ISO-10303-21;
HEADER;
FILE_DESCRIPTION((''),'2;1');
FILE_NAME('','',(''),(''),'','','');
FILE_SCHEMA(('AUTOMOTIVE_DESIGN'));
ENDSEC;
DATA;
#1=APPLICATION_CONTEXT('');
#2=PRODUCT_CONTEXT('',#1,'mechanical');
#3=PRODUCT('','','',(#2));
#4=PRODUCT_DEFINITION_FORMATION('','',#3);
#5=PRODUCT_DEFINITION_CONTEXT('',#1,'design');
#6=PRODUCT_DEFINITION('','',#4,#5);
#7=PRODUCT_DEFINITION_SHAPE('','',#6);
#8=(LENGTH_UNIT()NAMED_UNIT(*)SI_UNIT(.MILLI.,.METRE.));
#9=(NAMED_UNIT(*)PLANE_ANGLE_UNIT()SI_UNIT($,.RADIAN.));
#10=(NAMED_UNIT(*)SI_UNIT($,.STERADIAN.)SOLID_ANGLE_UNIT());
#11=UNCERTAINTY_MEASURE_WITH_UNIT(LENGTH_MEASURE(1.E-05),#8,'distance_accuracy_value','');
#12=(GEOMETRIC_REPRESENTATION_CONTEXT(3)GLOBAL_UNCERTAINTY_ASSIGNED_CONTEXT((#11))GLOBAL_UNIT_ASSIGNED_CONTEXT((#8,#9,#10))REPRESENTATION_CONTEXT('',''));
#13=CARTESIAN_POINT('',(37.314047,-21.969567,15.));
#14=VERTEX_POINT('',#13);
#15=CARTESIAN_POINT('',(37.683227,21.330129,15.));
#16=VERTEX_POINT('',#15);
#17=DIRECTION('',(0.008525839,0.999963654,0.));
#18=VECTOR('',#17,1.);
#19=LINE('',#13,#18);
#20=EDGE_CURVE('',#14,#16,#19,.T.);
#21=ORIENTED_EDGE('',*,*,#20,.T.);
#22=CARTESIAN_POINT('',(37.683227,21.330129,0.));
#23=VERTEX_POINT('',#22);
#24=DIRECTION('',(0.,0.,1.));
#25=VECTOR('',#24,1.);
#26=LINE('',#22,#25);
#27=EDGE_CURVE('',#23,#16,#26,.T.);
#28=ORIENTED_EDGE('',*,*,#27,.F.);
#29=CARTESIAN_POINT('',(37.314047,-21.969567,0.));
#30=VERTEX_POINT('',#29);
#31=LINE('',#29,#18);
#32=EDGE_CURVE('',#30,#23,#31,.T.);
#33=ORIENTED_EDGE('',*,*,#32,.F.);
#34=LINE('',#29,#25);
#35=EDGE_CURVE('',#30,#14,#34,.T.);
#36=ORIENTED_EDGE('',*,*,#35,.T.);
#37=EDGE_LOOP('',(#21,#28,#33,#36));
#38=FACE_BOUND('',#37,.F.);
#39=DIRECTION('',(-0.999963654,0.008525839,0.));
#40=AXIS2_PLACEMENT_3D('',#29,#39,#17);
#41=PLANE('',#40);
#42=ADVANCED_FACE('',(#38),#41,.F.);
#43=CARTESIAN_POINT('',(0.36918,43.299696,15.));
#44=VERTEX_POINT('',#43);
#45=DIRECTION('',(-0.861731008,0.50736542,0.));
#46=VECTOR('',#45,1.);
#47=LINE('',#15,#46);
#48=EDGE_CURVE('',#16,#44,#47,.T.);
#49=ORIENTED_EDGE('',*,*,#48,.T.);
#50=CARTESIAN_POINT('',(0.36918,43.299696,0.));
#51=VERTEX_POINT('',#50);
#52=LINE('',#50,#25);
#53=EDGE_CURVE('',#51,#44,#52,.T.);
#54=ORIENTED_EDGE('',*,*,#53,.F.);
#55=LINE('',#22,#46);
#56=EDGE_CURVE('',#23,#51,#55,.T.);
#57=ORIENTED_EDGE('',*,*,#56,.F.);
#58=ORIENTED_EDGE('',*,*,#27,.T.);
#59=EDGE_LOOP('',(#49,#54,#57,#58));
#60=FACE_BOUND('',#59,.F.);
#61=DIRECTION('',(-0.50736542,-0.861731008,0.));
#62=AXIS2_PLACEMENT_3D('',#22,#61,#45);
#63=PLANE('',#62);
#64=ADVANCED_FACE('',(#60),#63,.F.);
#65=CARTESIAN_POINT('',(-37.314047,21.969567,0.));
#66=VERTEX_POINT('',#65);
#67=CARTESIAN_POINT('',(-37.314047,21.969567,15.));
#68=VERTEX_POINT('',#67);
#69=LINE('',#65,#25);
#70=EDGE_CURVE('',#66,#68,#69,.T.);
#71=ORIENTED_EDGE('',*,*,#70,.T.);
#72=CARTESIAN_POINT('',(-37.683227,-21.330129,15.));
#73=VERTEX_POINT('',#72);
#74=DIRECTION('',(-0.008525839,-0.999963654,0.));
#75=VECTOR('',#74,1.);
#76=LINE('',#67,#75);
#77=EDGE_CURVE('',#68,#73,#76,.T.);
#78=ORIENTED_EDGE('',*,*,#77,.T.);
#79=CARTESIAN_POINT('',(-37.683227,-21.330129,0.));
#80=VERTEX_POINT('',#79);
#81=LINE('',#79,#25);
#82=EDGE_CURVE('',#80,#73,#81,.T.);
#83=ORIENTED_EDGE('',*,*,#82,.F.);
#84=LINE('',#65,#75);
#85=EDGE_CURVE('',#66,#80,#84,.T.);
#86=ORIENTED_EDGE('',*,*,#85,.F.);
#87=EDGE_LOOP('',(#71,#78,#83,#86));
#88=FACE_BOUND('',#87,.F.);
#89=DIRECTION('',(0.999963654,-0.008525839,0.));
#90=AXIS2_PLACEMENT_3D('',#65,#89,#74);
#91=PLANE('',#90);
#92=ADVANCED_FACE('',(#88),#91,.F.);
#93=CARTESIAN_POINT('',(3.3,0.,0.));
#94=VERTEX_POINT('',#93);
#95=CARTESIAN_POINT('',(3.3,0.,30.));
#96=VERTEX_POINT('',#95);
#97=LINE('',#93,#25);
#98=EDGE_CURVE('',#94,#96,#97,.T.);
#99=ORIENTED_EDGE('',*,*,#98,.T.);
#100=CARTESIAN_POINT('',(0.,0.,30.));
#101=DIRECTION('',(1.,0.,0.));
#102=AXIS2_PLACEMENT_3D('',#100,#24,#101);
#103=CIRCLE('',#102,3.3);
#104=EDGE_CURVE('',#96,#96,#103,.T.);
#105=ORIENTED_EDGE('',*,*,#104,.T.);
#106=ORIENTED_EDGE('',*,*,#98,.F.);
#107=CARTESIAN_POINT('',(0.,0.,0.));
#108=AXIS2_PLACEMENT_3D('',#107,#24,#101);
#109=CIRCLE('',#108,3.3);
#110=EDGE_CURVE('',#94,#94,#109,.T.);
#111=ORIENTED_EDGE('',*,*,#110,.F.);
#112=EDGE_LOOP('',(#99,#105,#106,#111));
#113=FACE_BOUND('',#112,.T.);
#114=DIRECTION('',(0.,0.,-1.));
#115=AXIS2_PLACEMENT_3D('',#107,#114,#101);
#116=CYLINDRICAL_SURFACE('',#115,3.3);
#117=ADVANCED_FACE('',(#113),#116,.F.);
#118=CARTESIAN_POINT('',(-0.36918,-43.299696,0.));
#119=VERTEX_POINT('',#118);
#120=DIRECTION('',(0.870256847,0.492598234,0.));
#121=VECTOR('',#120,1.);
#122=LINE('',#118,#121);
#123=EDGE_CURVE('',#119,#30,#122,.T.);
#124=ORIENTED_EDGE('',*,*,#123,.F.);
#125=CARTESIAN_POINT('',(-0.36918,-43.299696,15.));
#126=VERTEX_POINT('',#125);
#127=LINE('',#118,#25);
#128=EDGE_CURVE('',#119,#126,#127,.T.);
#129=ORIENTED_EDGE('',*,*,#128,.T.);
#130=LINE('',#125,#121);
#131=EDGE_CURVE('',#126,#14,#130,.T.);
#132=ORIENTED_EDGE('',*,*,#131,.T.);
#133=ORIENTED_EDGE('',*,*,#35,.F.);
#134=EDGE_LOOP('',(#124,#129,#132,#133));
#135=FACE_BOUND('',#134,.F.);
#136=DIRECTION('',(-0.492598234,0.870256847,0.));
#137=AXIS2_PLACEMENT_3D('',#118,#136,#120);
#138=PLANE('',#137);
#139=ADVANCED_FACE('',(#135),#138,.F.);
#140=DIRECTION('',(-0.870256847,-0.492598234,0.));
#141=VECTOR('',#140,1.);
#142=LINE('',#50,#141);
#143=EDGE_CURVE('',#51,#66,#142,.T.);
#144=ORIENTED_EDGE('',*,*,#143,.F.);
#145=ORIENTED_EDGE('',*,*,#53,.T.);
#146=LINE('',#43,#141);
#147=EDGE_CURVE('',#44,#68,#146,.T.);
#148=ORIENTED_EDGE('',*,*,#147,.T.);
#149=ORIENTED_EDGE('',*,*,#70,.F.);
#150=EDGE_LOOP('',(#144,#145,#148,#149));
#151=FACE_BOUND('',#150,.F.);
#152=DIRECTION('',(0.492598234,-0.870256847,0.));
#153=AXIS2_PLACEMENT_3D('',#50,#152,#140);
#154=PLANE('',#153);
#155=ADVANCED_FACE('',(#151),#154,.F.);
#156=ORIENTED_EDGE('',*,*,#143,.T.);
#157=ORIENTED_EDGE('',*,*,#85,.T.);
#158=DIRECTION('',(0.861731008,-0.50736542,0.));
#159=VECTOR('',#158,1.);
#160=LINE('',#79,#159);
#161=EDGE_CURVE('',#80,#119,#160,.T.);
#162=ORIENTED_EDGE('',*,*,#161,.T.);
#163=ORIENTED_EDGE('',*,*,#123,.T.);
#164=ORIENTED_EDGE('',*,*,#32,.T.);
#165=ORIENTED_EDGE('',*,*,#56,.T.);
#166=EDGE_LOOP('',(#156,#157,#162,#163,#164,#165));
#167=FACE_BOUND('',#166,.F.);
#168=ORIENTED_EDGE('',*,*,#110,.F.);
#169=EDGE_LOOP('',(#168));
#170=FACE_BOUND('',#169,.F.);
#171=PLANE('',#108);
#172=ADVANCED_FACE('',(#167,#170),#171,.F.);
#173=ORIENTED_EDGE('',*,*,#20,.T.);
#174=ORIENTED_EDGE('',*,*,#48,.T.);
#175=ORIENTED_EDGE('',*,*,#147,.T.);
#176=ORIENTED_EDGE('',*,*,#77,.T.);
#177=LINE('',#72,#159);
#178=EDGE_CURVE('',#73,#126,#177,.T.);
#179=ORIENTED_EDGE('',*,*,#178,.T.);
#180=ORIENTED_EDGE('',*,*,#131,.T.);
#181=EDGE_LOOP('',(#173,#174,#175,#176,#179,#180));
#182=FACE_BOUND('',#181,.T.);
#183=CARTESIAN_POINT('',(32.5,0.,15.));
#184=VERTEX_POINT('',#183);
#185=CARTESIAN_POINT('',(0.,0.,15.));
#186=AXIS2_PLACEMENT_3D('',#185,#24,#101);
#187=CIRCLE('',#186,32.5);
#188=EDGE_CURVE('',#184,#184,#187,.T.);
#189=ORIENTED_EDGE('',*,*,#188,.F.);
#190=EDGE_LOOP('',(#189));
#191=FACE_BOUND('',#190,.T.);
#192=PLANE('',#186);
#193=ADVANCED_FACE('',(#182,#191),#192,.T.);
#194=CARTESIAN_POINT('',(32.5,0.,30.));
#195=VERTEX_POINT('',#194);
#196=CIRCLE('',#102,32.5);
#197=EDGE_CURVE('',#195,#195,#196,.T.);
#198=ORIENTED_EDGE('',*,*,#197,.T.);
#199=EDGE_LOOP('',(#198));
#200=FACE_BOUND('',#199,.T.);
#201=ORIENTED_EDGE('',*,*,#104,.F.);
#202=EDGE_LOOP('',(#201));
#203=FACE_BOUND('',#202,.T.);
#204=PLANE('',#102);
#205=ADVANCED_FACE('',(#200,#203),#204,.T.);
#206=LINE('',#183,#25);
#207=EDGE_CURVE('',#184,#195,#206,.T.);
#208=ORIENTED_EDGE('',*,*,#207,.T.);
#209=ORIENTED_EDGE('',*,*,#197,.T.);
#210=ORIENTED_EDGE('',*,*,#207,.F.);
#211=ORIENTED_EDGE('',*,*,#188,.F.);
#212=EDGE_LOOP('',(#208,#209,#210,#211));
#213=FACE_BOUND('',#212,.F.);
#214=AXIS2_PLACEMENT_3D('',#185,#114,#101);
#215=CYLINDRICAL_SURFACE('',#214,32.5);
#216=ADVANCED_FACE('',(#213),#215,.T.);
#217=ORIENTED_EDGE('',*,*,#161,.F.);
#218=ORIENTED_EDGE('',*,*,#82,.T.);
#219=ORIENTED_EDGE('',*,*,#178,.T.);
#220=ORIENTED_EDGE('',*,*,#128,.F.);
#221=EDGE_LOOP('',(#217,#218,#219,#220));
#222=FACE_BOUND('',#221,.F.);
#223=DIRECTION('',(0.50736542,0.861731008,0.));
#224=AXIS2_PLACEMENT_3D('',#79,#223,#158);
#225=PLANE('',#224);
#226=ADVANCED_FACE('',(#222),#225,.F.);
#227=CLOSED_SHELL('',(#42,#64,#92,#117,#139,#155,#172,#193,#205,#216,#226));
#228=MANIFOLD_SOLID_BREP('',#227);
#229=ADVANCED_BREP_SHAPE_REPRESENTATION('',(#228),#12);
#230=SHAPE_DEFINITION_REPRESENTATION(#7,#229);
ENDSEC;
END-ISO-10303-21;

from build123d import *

# Parameters (mm, degrees)
F1_DEPTH = 15
F2_R     = 32.5
F3_DEPTH = 15
F4_R     = 3.3
F5_DEPTH = 30


# Not quite as in the source:
# - a feature names something its author has since deleted; it is built from what else it names


with BuildPart() as f1:
    # F0 (on Top) → F1 (new body)
    with BuildSketch(Plane.XY):
        Polygon((0.369179663, 43.2996963774), (-37.3140472075, 21.9695671555), (-37.6832268705, -21.330129222), (-0.369179663, -43.2996963774), (37.3140472075, -21.9695671555), (37.6832268705, 21.330129222), align=None)
    extrude(amount=F1_DEPTH)

    # F2 (on face) → F3 (join)
    with BuildSketch(Plane.XY.offset(15)):
        Circle(F2_R)
    extrude(amount=F3_DEPTH)


with BuildPart() as f5:
    # F4 (on Top) → F5 (new body)
    with BuildSketch(Plane.XY):
        Circle(F4_R)
    extrude(amount=F5_DEPTH)


with BuildPart() as f1_1:
    add(f1.part)

    # F6: cut F5
    add(f5.part, mode=Mode.SUBTRACT)


solid = f1_1.part
